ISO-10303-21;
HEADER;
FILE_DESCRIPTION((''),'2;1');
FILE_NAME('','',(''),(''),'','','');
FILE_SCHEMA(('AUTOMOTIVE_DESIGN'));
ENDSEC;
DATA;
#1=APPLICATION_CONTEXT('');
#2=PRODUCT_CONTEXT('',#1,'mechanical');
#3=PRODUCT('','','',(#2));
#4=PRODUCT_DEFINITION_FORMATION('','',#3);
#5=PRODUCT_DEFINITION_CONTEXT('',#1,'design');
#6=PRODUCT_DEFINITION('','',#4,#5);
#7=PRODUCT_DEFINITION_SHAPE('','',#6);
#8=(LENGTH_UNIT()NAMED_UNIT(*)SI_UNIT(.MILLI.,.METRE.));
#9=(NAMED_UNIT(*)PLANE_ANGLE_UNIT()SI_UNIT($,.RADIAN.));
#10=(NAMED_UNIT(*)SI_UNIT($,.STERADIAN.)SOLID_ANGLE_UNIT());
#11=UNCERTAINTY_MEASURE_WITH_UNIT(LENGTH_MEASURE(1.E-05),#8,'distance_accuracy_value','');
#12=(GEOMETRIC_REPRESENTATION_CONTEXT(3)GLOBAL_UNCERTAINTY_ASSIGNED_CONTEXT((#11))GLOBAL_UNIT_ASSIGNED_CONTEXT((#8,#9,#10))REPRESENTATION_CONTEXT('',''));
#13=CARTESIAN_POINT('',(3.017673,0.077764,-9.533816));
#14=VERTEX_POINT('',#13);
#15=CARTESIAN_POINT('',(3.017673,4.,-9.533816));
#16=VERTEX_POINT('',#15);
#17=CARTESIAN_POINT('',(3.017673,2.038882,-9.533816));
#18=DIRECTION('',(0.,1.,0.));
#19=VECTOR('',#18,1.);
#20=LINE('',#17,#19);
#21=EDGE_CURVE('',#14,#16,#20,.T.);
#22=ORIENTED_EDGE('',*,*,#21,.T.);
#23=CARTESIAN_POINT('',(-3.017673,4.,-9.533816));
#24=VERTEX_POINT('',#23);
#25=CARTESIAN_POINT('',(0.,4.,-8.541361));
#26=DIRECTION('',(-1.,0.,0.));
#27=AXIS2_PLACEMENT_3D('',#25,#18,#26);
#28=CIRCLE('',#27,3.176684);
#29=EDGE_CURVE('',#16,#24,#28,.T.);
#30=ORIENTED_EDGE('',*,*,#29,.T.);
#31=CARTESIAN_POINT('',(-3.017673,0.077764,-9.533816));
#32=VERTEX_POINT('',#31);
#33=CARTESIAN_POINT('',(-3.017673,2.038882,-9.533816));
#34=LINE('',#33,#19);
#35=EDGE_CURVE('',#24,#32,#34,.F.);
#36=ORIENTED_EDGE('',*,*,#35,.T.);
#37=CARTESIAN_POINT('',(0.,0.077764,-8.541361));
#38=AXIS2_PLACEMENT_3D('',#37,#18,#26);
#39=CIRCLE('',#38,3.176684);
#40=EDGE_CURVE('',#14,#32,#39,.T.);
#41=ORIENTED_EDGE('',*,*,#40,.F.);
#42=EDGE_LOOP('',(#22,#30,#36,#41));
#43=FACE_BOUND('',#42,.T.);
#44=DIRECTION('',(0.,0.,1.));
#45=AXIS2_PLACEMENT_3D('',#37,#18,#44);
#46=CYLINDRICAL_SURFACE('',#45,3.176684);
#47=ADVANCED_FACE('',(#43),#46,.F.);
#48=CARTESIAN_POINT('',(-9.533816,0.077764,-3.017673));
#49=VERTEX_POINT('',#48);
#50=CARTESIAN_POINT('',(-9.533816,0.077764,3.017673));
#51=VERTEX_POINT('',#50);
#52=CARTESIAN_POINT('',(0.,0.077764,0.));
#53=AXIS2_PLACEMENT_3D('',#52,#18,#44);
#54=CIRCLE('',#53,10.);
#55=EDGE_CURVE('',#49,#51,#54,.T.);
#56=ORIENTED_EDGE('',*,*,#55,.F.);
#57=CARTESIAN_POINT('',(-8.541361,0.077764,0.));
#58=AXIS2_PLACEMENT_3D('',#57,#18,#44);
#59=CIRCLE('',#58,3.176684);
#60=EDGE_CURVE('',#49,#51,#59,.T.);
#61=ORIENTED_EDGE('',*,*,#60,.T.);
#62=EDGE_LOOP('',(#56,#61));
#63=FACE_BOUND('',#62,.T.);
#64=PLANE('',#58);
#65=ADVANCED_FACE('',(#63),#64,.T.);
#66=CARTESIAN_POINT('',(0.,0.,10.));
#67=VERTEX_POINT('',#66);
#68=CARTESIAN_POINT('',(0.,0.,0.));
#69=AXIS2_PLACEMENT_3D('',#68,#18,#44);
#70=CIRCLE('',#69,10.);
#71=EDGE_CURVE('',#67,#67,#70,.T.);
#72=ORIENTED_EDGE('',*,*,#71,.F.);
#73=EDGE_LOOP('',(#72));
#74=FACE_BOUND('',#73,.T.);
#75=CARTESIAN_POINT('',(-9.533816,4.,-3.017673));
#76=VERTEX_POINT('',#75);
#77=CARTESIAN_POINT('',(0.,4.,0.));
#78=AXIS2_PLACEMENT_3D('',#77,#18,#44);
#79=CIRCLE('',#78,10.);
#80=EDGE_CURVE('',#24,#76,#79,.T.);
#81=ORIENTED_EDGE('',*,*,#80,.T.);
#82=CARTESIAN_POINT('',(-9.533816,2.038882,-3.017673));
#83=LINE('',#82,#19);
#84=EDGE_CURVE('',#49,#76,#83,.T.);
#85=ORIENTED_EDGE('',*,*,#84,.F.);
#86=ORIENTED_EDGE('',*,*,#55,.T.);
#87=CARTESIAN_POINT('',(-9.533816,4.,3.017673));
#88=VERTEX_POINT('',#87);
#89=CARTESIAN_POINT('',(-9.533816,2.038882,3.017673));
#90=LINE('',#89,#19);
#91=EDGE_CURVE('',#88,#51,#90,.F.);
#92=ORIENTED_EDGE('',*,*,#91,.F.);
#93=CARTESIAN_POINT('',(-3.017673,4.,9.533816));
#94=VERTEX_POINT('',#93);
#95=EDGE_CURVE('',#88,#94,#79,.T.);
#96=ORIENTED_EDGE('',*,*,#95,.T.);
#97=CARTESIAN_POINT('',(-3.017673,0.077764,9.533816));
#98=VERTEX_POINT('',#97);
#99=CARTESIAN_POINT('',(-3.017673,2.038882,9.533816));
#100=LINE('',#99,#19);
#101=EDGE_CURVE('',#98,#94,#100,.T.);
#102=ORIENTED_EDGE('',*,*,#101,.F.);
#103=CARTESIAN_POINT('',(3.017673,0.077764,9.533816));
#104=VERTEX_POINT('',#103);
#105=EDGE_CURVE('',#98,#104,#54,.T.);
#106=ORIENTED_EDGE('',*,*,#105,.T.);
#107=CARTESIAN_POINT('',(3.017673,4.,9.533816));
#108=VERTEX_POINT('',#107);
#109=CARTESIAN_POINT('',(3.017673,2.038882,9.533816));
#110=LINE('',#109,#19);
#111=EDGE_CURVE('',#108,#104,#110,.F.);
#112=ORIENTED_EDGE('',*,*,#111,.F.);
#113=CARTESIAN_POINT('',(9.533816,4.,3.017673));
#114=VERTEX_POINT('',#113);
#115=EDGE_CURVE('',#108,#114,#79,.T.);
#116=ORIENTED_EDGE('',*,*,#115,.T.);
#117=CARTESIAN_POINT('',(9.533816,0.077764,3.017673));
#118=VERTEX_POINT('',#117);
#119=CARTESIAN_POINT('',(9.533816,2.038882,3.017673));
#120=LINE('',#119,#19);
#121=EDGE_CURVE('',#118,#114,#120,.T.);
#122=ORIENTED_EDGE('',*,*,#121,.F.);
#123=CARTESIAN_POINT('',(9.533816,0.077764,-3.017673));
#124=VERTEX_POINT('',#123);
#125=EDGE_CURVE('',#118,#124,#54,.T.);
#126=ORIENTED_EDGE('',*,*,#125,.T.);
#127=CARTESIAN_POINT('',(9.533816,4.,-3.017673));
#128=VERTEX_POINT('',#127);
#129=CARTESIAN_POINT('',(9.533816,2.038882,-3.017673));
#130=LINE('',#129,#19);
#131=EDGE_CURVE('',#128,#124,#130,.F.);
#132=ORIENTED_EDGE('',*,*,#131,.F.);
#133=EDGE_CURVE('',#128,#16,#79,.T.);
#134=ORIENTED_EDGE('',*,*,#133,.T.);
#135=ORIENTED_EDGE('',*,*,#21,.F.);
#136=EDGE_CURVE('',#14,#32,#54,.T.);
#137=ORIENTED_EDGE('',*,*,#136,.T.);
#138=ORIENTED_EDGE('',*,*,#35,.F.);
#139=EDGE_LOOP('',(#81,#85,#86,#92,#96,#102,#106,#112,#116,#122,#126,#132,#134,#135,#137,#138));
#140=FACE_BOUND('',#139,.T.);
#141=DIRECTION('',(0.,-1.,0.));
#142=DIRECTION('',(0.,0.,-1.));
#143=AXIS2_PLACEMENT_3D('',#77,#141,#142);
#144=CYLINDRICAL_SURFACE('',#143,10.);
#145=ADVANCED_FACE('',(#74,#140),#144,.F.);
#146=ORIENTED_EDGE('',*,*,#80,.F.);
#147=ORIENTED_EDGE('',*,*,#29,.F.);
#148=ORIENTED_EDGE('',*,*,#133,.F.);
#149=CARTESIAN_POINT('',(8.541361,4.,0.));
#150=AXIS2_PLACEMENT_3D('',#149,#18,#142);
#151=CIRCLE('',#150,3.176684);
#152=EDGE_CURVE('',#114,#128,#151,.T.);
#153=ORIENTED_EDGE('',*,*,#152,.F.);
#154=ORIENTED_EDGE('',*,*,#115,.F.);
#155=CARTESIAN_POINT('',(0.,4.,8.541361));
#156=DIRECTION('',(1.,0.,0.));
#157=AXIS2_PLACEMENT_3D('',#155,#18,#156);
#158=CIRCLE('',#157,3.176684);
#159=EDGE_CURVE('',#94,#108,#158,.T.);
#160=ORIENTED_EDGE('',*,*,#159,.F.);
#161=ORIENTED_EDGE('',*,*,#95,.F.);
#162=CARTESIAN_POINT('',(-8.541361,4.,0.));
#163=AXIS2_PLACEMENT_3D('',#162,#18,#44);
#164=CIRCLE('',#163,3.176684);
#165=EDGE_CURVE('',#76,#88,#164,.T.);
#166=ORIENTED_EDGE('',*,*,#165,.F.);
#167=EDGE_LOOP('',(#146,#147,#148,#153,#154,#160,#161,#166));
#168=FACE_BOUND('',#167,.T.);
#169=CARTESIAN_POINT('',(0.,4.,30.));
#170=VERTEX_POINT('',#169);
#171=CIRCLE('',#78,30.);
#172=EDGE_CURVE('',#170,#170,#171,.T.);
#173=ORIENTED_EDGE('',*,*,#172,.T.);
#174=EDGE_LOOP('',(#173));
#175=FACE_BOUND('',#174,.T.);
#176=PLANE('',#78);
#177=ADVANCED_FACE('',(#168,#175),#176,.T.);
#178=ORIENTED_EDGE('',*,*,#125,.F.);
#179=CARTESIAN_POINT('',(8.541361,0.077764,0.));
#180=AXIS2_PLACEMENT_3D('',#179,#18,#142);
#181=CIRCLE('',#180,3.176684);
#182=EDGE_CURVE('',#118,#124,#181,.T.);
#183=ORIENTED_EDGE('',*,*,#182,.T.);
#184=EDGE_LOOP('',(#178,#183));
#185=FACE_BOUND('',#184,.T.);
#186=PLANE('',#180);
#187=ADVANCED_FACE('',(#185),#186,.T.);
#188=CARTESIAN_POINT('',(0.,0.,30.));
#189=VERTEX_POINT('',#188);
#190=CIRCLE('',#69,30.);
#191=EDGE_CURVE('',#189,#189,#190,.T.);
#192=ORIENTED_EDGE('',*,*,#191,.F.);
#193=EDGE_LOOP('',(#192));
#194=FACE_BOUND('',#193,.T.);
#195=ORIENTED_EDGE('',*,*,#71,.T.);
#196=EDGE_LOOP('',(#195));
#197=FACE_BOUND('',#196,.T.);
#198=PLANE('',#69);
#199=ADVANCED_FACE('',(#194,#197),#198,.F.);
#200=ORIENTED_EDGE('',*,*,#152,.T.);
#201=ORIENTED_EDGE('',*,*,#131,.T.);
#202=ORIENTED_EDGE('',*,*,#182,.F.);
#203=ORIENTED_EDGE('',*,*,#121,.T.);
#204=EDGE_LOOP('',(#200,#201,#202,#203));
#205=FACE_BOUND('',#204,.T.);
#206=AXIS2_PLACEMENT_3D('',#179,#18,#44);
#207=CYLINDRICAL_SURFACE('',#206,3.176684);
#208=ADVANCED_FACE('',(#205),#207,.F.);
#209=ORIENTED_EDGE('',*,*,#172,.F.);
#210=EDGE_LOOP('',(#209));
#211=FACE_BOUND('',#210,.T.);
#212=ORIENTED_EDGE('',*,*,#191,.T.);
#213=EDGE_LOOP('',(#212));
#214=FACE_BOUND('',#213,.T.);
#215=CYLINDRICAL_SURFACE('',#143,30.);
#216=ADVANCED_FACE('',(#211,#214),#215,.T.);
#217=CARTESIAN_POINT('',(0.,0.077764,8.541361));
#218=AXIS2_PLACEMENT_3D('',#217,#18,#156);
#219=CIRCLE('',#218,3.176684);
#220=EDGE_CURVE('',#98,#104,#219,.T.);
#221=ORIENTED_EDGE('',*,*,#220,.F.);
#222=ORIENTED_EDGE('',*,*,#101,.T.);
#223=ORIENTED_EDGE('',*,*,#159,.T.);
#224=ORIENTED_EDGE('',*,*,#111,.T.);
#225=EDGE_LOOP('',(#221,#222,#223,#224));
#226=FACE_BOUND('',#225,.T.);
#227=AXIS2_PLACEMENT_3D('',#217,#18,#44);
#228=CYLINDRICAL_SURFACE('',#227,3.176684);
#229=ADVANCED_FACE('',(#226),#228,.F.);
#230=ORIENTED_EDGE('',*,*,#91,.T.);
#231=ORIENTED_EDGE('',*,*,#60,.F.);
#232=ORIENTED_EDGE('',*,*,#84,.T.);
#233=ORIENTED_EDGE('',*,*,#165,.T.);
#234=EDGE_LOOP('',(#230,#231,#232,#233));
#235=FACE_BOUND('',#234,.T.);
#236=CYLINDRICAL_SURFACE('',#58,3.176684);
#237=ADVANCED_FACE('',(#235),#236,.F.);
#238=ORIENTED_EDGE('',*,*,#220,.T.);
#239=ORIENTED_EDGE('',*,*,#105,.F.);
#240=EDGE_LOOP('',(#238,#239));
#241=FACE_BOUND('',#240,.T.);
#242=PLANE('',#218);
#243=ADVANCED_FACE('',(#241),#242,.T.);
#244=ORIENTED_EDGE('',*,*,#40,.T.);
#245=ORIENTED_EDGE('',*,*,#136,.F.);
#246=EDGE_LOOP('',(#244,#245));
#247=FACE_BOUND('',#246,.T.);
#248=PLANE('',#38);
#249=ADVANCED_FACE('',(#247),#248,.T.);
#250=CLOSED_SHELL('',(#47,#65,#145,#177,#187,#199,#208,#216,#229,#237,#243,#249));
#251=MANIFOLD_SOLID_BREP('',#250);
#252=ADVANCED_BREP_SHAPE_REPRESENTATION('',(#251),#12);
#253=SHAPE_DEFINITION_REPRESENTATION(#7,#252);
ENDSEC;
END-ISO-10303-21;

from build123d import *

# Parameters (mm, degrees)
SKETCH1_R           = 30
BOSS_EXTRUDE1_DEPTH = 4
SKETCH2_R           = 10
CUT_EXTRUDE1_DEPTH  = 43.614551505
SKETCH3_R           = 3.176683692
CUT_EXTRUDE2_DEPTH  = 3.92223649
CIRPATTERN1_COUNT   = 4


with BuildPart() as part:
    # Sketch1 → Boss-Extrude1 (new body)
    with BuildSketch(Plane(origin=(0, 0, 0), x_dir=(1, 0, 0), z_dir=(0, 1, 0))):
        Circle(SKETCH1_R)
    extrude(amount=BOSS_EXTRUDE1_DEPTH)

    # Sketch2 → Cut-Extrude1 (cut, through all)
    with BuildSketch(Plane(origin=(0, 0, 0), x_dir=(1, 0, 0), z_dir=(0, 1, 0))):
        Circle(SKETCH2_R)
    extrude(amount=CUT_EXTRUDE1_DEPTH, mode=Mode.SUBTRACT)

    # Sketch3 → Cut-Extrude2 (cut)
    with BuildSketch(Plane(origin=(0, 4, 0), x_dir=(1, 0, 0), z_dir=(0, 1, 0))):
        with Locations((-8.54136093, 0)):
            Circle(SKETCH3_R)
    cut_extrude2 = extrude(amount=-CUT_EXTRUDE2_DEPTH, mode=Mode.SUBTRACT)

    # CirPattern1: Cut-Extrude2 ×4 about axis
    cirpattern1_axis = Axis((0, 0, 0), (0, 1, 0))
    for i in range(1, CIRPATTERN1_COUNT):
        add(cut_extrude2.rotate(cirpattern1_axis, i * 360 / CIRPATTERN1_COUNT), mode=Mode.SUBTRACT)


solid = part.part
